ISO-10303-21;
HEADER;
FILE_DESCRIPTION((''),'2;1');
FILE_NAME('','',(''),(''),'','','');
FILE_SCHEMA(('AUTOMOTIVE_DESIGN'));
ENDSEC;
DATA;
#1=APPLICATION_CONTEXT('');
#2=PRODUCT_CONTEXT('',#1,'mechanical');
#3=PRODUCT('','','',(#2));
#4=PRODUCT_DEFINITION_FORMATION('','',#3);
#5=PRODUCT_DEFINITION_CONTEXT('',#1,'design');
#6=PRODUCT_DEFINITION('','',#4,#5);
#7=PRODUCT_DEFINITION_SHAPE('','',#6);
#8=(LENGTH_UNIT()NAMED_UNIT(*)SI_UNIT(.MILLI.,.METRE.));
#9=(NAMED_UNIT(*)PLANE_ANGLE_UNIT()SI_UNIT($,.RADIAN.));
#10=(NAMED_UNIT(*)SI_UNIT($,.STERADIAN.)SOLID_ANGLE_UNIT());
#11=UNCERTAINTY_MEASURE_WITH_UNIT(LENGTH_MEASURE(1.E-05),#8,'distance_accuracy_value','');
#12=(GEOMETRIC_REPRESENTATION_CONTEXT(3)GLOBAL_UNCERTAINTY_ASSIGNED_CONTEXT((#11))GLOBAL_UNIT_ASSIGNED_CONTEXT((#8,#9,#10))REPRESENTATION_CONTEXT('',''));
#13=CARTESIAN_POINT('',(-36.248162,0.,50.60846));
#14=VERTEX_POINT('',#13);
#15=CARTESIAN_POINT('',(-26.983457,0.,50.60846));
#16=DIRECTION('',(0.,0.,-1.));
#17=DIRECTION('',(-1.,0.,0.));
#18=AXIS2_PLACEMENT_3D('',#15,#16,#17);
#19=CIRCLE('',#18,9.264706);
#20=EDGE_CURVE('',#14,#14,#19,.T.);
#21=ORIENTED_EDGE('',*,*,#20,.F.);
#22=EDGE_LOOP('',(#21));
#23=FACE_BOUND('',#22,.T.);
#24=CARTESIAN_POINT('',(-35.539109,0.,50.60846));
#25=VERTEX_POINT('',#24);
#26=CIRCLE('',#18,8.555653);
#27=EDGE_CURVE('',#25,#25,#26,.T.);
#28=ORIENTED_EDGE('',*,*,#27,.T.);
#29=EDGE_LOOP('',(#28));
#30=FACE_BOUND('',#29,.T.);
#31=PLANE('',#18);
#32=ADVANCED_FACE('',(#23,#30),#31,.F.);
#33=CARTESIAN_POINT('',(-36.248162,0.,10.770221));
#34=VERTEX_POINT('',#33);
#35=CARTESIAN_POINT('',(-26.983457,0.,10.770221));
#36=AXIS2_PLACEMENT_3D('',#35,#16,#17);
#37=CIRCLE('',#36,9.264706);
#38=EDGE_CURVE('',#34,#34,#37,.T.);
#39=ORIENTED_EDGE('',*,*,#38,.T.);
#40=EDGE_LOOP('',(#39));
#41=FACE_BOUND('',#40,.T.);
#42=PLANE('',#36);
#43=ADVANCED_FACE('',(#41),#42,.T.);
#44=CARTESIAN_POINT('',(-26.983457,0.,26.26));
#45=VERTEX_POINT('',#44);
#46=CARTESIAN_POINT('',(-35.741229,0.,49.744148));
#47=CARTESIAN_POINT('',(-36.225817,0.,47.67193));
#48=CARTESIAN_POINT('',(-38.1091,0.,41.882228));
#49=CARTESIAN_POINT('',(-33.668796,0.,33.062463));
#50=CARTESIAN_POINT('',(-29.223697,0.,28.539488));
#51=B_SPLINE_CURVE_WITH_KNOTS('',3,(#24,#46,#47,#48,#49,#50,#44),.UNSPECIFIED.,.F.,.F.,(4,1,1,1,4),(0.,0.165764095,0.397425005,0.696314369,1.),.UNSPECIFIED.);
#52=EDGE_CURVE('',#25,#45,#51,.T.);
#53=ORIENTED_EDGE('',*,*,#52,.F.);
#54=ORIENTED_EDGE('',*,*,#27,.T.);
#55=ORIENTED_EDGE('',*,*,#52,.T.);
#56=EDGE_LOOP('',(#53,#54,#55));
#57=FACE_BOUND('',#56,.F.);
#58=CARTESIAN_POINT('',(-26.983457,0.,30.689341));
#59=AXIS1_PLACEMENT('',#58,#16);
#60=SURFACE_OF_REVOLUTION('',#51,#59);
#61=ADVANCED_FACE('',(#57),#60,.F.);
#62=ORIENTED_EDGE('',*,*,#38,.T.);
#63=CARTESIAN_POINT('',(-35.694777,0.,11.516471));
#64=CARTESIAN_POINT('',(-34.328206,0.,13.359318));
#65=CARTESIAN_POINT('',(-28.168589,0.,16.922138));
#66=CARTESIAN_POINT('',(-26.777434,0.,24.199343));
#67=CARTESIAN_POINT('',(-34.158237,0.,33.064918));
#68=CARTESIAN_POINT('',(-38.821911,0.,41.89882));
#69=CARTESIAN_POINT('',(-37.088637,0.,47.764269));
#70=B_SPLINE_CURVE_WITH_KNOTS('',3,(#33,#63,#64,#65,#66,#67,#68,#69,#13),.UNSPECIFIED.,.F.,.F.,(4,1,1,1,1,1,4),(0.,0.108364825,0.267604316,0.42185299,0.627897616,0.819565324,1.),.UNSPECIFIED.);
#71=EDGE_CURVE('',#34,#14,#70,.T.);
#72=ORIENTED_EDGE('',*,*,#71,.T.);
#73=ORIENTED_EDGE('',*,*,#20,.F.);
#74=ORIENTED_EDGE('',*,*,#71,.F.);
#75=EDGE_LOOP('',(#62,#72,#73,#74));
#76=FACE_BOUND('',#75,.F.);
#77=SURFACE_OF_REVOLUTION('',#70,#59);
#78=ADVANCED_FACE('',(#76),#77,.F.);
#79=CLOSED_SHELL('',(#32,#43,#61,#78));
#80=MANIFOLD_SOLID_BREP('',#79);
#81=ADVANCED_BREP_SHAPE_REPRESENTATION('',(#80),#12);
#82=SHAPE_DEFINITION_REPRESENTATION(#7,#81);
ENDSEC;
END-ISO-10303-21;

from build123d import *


with BuildPart() as f1:
    # F0 (on Front) → F1 (revolve)
    with BuildSketch(Plane.XZ):
        with BuildLine():
            Line((-26.9834566861, 10.7702212408), (-26.9834566861, 26.2599997222))
            add(Edge.make_bspline(
                [(-35.5391092598, 50.6084598601), (-35.7412288275, 49.7441475927), (-36.2258173029, 47.6719298022), (-38.1090999919, 41.8822277887), (-33.6687963717, 33.0624633891), (-29.2236970122, 28.5394879965), (-26.9834566861, 26.2599997222)],
                knots=[0, 0, 0, 0, 0.1657640951, 0.3974250046, 0.6963143689, 1, 1, 1, 1], degree=3))
            Line((-35.5391092598, 50.6084598601), (-36.2481623888, 50.6084598601))
            add(Edge.make_bspline(
                [(-36.2481623888, 10.7702212408), (-35.69477712, 11.5164713989), (-34.32820558, 13.3593181191), (-28.168588874, 16.9221381423), (-26.777434281, 24.1993426888), (-34.15823742, 33.0649179346), (-38.8219110516, 41.8988195772), (-37.0886372449, 47.7642685179), (-36.2481623888, 50.6084598601)],
                knots=[0, 0, 0, 0, 0.1083648253, 0.2676043157, 0.4218529902, 0.6278976162, 0.8195653241, 1, 1, 1, 1], degree=3))
            Line((-36.2481623888, 10.7702212408), (-26.9834566861, 10.7702212408))
        make_face()
    revolve(axis=Axis((-26.9834566861, 0, 30.6893405505), (0, 0, -1)))


solid = f1.part
